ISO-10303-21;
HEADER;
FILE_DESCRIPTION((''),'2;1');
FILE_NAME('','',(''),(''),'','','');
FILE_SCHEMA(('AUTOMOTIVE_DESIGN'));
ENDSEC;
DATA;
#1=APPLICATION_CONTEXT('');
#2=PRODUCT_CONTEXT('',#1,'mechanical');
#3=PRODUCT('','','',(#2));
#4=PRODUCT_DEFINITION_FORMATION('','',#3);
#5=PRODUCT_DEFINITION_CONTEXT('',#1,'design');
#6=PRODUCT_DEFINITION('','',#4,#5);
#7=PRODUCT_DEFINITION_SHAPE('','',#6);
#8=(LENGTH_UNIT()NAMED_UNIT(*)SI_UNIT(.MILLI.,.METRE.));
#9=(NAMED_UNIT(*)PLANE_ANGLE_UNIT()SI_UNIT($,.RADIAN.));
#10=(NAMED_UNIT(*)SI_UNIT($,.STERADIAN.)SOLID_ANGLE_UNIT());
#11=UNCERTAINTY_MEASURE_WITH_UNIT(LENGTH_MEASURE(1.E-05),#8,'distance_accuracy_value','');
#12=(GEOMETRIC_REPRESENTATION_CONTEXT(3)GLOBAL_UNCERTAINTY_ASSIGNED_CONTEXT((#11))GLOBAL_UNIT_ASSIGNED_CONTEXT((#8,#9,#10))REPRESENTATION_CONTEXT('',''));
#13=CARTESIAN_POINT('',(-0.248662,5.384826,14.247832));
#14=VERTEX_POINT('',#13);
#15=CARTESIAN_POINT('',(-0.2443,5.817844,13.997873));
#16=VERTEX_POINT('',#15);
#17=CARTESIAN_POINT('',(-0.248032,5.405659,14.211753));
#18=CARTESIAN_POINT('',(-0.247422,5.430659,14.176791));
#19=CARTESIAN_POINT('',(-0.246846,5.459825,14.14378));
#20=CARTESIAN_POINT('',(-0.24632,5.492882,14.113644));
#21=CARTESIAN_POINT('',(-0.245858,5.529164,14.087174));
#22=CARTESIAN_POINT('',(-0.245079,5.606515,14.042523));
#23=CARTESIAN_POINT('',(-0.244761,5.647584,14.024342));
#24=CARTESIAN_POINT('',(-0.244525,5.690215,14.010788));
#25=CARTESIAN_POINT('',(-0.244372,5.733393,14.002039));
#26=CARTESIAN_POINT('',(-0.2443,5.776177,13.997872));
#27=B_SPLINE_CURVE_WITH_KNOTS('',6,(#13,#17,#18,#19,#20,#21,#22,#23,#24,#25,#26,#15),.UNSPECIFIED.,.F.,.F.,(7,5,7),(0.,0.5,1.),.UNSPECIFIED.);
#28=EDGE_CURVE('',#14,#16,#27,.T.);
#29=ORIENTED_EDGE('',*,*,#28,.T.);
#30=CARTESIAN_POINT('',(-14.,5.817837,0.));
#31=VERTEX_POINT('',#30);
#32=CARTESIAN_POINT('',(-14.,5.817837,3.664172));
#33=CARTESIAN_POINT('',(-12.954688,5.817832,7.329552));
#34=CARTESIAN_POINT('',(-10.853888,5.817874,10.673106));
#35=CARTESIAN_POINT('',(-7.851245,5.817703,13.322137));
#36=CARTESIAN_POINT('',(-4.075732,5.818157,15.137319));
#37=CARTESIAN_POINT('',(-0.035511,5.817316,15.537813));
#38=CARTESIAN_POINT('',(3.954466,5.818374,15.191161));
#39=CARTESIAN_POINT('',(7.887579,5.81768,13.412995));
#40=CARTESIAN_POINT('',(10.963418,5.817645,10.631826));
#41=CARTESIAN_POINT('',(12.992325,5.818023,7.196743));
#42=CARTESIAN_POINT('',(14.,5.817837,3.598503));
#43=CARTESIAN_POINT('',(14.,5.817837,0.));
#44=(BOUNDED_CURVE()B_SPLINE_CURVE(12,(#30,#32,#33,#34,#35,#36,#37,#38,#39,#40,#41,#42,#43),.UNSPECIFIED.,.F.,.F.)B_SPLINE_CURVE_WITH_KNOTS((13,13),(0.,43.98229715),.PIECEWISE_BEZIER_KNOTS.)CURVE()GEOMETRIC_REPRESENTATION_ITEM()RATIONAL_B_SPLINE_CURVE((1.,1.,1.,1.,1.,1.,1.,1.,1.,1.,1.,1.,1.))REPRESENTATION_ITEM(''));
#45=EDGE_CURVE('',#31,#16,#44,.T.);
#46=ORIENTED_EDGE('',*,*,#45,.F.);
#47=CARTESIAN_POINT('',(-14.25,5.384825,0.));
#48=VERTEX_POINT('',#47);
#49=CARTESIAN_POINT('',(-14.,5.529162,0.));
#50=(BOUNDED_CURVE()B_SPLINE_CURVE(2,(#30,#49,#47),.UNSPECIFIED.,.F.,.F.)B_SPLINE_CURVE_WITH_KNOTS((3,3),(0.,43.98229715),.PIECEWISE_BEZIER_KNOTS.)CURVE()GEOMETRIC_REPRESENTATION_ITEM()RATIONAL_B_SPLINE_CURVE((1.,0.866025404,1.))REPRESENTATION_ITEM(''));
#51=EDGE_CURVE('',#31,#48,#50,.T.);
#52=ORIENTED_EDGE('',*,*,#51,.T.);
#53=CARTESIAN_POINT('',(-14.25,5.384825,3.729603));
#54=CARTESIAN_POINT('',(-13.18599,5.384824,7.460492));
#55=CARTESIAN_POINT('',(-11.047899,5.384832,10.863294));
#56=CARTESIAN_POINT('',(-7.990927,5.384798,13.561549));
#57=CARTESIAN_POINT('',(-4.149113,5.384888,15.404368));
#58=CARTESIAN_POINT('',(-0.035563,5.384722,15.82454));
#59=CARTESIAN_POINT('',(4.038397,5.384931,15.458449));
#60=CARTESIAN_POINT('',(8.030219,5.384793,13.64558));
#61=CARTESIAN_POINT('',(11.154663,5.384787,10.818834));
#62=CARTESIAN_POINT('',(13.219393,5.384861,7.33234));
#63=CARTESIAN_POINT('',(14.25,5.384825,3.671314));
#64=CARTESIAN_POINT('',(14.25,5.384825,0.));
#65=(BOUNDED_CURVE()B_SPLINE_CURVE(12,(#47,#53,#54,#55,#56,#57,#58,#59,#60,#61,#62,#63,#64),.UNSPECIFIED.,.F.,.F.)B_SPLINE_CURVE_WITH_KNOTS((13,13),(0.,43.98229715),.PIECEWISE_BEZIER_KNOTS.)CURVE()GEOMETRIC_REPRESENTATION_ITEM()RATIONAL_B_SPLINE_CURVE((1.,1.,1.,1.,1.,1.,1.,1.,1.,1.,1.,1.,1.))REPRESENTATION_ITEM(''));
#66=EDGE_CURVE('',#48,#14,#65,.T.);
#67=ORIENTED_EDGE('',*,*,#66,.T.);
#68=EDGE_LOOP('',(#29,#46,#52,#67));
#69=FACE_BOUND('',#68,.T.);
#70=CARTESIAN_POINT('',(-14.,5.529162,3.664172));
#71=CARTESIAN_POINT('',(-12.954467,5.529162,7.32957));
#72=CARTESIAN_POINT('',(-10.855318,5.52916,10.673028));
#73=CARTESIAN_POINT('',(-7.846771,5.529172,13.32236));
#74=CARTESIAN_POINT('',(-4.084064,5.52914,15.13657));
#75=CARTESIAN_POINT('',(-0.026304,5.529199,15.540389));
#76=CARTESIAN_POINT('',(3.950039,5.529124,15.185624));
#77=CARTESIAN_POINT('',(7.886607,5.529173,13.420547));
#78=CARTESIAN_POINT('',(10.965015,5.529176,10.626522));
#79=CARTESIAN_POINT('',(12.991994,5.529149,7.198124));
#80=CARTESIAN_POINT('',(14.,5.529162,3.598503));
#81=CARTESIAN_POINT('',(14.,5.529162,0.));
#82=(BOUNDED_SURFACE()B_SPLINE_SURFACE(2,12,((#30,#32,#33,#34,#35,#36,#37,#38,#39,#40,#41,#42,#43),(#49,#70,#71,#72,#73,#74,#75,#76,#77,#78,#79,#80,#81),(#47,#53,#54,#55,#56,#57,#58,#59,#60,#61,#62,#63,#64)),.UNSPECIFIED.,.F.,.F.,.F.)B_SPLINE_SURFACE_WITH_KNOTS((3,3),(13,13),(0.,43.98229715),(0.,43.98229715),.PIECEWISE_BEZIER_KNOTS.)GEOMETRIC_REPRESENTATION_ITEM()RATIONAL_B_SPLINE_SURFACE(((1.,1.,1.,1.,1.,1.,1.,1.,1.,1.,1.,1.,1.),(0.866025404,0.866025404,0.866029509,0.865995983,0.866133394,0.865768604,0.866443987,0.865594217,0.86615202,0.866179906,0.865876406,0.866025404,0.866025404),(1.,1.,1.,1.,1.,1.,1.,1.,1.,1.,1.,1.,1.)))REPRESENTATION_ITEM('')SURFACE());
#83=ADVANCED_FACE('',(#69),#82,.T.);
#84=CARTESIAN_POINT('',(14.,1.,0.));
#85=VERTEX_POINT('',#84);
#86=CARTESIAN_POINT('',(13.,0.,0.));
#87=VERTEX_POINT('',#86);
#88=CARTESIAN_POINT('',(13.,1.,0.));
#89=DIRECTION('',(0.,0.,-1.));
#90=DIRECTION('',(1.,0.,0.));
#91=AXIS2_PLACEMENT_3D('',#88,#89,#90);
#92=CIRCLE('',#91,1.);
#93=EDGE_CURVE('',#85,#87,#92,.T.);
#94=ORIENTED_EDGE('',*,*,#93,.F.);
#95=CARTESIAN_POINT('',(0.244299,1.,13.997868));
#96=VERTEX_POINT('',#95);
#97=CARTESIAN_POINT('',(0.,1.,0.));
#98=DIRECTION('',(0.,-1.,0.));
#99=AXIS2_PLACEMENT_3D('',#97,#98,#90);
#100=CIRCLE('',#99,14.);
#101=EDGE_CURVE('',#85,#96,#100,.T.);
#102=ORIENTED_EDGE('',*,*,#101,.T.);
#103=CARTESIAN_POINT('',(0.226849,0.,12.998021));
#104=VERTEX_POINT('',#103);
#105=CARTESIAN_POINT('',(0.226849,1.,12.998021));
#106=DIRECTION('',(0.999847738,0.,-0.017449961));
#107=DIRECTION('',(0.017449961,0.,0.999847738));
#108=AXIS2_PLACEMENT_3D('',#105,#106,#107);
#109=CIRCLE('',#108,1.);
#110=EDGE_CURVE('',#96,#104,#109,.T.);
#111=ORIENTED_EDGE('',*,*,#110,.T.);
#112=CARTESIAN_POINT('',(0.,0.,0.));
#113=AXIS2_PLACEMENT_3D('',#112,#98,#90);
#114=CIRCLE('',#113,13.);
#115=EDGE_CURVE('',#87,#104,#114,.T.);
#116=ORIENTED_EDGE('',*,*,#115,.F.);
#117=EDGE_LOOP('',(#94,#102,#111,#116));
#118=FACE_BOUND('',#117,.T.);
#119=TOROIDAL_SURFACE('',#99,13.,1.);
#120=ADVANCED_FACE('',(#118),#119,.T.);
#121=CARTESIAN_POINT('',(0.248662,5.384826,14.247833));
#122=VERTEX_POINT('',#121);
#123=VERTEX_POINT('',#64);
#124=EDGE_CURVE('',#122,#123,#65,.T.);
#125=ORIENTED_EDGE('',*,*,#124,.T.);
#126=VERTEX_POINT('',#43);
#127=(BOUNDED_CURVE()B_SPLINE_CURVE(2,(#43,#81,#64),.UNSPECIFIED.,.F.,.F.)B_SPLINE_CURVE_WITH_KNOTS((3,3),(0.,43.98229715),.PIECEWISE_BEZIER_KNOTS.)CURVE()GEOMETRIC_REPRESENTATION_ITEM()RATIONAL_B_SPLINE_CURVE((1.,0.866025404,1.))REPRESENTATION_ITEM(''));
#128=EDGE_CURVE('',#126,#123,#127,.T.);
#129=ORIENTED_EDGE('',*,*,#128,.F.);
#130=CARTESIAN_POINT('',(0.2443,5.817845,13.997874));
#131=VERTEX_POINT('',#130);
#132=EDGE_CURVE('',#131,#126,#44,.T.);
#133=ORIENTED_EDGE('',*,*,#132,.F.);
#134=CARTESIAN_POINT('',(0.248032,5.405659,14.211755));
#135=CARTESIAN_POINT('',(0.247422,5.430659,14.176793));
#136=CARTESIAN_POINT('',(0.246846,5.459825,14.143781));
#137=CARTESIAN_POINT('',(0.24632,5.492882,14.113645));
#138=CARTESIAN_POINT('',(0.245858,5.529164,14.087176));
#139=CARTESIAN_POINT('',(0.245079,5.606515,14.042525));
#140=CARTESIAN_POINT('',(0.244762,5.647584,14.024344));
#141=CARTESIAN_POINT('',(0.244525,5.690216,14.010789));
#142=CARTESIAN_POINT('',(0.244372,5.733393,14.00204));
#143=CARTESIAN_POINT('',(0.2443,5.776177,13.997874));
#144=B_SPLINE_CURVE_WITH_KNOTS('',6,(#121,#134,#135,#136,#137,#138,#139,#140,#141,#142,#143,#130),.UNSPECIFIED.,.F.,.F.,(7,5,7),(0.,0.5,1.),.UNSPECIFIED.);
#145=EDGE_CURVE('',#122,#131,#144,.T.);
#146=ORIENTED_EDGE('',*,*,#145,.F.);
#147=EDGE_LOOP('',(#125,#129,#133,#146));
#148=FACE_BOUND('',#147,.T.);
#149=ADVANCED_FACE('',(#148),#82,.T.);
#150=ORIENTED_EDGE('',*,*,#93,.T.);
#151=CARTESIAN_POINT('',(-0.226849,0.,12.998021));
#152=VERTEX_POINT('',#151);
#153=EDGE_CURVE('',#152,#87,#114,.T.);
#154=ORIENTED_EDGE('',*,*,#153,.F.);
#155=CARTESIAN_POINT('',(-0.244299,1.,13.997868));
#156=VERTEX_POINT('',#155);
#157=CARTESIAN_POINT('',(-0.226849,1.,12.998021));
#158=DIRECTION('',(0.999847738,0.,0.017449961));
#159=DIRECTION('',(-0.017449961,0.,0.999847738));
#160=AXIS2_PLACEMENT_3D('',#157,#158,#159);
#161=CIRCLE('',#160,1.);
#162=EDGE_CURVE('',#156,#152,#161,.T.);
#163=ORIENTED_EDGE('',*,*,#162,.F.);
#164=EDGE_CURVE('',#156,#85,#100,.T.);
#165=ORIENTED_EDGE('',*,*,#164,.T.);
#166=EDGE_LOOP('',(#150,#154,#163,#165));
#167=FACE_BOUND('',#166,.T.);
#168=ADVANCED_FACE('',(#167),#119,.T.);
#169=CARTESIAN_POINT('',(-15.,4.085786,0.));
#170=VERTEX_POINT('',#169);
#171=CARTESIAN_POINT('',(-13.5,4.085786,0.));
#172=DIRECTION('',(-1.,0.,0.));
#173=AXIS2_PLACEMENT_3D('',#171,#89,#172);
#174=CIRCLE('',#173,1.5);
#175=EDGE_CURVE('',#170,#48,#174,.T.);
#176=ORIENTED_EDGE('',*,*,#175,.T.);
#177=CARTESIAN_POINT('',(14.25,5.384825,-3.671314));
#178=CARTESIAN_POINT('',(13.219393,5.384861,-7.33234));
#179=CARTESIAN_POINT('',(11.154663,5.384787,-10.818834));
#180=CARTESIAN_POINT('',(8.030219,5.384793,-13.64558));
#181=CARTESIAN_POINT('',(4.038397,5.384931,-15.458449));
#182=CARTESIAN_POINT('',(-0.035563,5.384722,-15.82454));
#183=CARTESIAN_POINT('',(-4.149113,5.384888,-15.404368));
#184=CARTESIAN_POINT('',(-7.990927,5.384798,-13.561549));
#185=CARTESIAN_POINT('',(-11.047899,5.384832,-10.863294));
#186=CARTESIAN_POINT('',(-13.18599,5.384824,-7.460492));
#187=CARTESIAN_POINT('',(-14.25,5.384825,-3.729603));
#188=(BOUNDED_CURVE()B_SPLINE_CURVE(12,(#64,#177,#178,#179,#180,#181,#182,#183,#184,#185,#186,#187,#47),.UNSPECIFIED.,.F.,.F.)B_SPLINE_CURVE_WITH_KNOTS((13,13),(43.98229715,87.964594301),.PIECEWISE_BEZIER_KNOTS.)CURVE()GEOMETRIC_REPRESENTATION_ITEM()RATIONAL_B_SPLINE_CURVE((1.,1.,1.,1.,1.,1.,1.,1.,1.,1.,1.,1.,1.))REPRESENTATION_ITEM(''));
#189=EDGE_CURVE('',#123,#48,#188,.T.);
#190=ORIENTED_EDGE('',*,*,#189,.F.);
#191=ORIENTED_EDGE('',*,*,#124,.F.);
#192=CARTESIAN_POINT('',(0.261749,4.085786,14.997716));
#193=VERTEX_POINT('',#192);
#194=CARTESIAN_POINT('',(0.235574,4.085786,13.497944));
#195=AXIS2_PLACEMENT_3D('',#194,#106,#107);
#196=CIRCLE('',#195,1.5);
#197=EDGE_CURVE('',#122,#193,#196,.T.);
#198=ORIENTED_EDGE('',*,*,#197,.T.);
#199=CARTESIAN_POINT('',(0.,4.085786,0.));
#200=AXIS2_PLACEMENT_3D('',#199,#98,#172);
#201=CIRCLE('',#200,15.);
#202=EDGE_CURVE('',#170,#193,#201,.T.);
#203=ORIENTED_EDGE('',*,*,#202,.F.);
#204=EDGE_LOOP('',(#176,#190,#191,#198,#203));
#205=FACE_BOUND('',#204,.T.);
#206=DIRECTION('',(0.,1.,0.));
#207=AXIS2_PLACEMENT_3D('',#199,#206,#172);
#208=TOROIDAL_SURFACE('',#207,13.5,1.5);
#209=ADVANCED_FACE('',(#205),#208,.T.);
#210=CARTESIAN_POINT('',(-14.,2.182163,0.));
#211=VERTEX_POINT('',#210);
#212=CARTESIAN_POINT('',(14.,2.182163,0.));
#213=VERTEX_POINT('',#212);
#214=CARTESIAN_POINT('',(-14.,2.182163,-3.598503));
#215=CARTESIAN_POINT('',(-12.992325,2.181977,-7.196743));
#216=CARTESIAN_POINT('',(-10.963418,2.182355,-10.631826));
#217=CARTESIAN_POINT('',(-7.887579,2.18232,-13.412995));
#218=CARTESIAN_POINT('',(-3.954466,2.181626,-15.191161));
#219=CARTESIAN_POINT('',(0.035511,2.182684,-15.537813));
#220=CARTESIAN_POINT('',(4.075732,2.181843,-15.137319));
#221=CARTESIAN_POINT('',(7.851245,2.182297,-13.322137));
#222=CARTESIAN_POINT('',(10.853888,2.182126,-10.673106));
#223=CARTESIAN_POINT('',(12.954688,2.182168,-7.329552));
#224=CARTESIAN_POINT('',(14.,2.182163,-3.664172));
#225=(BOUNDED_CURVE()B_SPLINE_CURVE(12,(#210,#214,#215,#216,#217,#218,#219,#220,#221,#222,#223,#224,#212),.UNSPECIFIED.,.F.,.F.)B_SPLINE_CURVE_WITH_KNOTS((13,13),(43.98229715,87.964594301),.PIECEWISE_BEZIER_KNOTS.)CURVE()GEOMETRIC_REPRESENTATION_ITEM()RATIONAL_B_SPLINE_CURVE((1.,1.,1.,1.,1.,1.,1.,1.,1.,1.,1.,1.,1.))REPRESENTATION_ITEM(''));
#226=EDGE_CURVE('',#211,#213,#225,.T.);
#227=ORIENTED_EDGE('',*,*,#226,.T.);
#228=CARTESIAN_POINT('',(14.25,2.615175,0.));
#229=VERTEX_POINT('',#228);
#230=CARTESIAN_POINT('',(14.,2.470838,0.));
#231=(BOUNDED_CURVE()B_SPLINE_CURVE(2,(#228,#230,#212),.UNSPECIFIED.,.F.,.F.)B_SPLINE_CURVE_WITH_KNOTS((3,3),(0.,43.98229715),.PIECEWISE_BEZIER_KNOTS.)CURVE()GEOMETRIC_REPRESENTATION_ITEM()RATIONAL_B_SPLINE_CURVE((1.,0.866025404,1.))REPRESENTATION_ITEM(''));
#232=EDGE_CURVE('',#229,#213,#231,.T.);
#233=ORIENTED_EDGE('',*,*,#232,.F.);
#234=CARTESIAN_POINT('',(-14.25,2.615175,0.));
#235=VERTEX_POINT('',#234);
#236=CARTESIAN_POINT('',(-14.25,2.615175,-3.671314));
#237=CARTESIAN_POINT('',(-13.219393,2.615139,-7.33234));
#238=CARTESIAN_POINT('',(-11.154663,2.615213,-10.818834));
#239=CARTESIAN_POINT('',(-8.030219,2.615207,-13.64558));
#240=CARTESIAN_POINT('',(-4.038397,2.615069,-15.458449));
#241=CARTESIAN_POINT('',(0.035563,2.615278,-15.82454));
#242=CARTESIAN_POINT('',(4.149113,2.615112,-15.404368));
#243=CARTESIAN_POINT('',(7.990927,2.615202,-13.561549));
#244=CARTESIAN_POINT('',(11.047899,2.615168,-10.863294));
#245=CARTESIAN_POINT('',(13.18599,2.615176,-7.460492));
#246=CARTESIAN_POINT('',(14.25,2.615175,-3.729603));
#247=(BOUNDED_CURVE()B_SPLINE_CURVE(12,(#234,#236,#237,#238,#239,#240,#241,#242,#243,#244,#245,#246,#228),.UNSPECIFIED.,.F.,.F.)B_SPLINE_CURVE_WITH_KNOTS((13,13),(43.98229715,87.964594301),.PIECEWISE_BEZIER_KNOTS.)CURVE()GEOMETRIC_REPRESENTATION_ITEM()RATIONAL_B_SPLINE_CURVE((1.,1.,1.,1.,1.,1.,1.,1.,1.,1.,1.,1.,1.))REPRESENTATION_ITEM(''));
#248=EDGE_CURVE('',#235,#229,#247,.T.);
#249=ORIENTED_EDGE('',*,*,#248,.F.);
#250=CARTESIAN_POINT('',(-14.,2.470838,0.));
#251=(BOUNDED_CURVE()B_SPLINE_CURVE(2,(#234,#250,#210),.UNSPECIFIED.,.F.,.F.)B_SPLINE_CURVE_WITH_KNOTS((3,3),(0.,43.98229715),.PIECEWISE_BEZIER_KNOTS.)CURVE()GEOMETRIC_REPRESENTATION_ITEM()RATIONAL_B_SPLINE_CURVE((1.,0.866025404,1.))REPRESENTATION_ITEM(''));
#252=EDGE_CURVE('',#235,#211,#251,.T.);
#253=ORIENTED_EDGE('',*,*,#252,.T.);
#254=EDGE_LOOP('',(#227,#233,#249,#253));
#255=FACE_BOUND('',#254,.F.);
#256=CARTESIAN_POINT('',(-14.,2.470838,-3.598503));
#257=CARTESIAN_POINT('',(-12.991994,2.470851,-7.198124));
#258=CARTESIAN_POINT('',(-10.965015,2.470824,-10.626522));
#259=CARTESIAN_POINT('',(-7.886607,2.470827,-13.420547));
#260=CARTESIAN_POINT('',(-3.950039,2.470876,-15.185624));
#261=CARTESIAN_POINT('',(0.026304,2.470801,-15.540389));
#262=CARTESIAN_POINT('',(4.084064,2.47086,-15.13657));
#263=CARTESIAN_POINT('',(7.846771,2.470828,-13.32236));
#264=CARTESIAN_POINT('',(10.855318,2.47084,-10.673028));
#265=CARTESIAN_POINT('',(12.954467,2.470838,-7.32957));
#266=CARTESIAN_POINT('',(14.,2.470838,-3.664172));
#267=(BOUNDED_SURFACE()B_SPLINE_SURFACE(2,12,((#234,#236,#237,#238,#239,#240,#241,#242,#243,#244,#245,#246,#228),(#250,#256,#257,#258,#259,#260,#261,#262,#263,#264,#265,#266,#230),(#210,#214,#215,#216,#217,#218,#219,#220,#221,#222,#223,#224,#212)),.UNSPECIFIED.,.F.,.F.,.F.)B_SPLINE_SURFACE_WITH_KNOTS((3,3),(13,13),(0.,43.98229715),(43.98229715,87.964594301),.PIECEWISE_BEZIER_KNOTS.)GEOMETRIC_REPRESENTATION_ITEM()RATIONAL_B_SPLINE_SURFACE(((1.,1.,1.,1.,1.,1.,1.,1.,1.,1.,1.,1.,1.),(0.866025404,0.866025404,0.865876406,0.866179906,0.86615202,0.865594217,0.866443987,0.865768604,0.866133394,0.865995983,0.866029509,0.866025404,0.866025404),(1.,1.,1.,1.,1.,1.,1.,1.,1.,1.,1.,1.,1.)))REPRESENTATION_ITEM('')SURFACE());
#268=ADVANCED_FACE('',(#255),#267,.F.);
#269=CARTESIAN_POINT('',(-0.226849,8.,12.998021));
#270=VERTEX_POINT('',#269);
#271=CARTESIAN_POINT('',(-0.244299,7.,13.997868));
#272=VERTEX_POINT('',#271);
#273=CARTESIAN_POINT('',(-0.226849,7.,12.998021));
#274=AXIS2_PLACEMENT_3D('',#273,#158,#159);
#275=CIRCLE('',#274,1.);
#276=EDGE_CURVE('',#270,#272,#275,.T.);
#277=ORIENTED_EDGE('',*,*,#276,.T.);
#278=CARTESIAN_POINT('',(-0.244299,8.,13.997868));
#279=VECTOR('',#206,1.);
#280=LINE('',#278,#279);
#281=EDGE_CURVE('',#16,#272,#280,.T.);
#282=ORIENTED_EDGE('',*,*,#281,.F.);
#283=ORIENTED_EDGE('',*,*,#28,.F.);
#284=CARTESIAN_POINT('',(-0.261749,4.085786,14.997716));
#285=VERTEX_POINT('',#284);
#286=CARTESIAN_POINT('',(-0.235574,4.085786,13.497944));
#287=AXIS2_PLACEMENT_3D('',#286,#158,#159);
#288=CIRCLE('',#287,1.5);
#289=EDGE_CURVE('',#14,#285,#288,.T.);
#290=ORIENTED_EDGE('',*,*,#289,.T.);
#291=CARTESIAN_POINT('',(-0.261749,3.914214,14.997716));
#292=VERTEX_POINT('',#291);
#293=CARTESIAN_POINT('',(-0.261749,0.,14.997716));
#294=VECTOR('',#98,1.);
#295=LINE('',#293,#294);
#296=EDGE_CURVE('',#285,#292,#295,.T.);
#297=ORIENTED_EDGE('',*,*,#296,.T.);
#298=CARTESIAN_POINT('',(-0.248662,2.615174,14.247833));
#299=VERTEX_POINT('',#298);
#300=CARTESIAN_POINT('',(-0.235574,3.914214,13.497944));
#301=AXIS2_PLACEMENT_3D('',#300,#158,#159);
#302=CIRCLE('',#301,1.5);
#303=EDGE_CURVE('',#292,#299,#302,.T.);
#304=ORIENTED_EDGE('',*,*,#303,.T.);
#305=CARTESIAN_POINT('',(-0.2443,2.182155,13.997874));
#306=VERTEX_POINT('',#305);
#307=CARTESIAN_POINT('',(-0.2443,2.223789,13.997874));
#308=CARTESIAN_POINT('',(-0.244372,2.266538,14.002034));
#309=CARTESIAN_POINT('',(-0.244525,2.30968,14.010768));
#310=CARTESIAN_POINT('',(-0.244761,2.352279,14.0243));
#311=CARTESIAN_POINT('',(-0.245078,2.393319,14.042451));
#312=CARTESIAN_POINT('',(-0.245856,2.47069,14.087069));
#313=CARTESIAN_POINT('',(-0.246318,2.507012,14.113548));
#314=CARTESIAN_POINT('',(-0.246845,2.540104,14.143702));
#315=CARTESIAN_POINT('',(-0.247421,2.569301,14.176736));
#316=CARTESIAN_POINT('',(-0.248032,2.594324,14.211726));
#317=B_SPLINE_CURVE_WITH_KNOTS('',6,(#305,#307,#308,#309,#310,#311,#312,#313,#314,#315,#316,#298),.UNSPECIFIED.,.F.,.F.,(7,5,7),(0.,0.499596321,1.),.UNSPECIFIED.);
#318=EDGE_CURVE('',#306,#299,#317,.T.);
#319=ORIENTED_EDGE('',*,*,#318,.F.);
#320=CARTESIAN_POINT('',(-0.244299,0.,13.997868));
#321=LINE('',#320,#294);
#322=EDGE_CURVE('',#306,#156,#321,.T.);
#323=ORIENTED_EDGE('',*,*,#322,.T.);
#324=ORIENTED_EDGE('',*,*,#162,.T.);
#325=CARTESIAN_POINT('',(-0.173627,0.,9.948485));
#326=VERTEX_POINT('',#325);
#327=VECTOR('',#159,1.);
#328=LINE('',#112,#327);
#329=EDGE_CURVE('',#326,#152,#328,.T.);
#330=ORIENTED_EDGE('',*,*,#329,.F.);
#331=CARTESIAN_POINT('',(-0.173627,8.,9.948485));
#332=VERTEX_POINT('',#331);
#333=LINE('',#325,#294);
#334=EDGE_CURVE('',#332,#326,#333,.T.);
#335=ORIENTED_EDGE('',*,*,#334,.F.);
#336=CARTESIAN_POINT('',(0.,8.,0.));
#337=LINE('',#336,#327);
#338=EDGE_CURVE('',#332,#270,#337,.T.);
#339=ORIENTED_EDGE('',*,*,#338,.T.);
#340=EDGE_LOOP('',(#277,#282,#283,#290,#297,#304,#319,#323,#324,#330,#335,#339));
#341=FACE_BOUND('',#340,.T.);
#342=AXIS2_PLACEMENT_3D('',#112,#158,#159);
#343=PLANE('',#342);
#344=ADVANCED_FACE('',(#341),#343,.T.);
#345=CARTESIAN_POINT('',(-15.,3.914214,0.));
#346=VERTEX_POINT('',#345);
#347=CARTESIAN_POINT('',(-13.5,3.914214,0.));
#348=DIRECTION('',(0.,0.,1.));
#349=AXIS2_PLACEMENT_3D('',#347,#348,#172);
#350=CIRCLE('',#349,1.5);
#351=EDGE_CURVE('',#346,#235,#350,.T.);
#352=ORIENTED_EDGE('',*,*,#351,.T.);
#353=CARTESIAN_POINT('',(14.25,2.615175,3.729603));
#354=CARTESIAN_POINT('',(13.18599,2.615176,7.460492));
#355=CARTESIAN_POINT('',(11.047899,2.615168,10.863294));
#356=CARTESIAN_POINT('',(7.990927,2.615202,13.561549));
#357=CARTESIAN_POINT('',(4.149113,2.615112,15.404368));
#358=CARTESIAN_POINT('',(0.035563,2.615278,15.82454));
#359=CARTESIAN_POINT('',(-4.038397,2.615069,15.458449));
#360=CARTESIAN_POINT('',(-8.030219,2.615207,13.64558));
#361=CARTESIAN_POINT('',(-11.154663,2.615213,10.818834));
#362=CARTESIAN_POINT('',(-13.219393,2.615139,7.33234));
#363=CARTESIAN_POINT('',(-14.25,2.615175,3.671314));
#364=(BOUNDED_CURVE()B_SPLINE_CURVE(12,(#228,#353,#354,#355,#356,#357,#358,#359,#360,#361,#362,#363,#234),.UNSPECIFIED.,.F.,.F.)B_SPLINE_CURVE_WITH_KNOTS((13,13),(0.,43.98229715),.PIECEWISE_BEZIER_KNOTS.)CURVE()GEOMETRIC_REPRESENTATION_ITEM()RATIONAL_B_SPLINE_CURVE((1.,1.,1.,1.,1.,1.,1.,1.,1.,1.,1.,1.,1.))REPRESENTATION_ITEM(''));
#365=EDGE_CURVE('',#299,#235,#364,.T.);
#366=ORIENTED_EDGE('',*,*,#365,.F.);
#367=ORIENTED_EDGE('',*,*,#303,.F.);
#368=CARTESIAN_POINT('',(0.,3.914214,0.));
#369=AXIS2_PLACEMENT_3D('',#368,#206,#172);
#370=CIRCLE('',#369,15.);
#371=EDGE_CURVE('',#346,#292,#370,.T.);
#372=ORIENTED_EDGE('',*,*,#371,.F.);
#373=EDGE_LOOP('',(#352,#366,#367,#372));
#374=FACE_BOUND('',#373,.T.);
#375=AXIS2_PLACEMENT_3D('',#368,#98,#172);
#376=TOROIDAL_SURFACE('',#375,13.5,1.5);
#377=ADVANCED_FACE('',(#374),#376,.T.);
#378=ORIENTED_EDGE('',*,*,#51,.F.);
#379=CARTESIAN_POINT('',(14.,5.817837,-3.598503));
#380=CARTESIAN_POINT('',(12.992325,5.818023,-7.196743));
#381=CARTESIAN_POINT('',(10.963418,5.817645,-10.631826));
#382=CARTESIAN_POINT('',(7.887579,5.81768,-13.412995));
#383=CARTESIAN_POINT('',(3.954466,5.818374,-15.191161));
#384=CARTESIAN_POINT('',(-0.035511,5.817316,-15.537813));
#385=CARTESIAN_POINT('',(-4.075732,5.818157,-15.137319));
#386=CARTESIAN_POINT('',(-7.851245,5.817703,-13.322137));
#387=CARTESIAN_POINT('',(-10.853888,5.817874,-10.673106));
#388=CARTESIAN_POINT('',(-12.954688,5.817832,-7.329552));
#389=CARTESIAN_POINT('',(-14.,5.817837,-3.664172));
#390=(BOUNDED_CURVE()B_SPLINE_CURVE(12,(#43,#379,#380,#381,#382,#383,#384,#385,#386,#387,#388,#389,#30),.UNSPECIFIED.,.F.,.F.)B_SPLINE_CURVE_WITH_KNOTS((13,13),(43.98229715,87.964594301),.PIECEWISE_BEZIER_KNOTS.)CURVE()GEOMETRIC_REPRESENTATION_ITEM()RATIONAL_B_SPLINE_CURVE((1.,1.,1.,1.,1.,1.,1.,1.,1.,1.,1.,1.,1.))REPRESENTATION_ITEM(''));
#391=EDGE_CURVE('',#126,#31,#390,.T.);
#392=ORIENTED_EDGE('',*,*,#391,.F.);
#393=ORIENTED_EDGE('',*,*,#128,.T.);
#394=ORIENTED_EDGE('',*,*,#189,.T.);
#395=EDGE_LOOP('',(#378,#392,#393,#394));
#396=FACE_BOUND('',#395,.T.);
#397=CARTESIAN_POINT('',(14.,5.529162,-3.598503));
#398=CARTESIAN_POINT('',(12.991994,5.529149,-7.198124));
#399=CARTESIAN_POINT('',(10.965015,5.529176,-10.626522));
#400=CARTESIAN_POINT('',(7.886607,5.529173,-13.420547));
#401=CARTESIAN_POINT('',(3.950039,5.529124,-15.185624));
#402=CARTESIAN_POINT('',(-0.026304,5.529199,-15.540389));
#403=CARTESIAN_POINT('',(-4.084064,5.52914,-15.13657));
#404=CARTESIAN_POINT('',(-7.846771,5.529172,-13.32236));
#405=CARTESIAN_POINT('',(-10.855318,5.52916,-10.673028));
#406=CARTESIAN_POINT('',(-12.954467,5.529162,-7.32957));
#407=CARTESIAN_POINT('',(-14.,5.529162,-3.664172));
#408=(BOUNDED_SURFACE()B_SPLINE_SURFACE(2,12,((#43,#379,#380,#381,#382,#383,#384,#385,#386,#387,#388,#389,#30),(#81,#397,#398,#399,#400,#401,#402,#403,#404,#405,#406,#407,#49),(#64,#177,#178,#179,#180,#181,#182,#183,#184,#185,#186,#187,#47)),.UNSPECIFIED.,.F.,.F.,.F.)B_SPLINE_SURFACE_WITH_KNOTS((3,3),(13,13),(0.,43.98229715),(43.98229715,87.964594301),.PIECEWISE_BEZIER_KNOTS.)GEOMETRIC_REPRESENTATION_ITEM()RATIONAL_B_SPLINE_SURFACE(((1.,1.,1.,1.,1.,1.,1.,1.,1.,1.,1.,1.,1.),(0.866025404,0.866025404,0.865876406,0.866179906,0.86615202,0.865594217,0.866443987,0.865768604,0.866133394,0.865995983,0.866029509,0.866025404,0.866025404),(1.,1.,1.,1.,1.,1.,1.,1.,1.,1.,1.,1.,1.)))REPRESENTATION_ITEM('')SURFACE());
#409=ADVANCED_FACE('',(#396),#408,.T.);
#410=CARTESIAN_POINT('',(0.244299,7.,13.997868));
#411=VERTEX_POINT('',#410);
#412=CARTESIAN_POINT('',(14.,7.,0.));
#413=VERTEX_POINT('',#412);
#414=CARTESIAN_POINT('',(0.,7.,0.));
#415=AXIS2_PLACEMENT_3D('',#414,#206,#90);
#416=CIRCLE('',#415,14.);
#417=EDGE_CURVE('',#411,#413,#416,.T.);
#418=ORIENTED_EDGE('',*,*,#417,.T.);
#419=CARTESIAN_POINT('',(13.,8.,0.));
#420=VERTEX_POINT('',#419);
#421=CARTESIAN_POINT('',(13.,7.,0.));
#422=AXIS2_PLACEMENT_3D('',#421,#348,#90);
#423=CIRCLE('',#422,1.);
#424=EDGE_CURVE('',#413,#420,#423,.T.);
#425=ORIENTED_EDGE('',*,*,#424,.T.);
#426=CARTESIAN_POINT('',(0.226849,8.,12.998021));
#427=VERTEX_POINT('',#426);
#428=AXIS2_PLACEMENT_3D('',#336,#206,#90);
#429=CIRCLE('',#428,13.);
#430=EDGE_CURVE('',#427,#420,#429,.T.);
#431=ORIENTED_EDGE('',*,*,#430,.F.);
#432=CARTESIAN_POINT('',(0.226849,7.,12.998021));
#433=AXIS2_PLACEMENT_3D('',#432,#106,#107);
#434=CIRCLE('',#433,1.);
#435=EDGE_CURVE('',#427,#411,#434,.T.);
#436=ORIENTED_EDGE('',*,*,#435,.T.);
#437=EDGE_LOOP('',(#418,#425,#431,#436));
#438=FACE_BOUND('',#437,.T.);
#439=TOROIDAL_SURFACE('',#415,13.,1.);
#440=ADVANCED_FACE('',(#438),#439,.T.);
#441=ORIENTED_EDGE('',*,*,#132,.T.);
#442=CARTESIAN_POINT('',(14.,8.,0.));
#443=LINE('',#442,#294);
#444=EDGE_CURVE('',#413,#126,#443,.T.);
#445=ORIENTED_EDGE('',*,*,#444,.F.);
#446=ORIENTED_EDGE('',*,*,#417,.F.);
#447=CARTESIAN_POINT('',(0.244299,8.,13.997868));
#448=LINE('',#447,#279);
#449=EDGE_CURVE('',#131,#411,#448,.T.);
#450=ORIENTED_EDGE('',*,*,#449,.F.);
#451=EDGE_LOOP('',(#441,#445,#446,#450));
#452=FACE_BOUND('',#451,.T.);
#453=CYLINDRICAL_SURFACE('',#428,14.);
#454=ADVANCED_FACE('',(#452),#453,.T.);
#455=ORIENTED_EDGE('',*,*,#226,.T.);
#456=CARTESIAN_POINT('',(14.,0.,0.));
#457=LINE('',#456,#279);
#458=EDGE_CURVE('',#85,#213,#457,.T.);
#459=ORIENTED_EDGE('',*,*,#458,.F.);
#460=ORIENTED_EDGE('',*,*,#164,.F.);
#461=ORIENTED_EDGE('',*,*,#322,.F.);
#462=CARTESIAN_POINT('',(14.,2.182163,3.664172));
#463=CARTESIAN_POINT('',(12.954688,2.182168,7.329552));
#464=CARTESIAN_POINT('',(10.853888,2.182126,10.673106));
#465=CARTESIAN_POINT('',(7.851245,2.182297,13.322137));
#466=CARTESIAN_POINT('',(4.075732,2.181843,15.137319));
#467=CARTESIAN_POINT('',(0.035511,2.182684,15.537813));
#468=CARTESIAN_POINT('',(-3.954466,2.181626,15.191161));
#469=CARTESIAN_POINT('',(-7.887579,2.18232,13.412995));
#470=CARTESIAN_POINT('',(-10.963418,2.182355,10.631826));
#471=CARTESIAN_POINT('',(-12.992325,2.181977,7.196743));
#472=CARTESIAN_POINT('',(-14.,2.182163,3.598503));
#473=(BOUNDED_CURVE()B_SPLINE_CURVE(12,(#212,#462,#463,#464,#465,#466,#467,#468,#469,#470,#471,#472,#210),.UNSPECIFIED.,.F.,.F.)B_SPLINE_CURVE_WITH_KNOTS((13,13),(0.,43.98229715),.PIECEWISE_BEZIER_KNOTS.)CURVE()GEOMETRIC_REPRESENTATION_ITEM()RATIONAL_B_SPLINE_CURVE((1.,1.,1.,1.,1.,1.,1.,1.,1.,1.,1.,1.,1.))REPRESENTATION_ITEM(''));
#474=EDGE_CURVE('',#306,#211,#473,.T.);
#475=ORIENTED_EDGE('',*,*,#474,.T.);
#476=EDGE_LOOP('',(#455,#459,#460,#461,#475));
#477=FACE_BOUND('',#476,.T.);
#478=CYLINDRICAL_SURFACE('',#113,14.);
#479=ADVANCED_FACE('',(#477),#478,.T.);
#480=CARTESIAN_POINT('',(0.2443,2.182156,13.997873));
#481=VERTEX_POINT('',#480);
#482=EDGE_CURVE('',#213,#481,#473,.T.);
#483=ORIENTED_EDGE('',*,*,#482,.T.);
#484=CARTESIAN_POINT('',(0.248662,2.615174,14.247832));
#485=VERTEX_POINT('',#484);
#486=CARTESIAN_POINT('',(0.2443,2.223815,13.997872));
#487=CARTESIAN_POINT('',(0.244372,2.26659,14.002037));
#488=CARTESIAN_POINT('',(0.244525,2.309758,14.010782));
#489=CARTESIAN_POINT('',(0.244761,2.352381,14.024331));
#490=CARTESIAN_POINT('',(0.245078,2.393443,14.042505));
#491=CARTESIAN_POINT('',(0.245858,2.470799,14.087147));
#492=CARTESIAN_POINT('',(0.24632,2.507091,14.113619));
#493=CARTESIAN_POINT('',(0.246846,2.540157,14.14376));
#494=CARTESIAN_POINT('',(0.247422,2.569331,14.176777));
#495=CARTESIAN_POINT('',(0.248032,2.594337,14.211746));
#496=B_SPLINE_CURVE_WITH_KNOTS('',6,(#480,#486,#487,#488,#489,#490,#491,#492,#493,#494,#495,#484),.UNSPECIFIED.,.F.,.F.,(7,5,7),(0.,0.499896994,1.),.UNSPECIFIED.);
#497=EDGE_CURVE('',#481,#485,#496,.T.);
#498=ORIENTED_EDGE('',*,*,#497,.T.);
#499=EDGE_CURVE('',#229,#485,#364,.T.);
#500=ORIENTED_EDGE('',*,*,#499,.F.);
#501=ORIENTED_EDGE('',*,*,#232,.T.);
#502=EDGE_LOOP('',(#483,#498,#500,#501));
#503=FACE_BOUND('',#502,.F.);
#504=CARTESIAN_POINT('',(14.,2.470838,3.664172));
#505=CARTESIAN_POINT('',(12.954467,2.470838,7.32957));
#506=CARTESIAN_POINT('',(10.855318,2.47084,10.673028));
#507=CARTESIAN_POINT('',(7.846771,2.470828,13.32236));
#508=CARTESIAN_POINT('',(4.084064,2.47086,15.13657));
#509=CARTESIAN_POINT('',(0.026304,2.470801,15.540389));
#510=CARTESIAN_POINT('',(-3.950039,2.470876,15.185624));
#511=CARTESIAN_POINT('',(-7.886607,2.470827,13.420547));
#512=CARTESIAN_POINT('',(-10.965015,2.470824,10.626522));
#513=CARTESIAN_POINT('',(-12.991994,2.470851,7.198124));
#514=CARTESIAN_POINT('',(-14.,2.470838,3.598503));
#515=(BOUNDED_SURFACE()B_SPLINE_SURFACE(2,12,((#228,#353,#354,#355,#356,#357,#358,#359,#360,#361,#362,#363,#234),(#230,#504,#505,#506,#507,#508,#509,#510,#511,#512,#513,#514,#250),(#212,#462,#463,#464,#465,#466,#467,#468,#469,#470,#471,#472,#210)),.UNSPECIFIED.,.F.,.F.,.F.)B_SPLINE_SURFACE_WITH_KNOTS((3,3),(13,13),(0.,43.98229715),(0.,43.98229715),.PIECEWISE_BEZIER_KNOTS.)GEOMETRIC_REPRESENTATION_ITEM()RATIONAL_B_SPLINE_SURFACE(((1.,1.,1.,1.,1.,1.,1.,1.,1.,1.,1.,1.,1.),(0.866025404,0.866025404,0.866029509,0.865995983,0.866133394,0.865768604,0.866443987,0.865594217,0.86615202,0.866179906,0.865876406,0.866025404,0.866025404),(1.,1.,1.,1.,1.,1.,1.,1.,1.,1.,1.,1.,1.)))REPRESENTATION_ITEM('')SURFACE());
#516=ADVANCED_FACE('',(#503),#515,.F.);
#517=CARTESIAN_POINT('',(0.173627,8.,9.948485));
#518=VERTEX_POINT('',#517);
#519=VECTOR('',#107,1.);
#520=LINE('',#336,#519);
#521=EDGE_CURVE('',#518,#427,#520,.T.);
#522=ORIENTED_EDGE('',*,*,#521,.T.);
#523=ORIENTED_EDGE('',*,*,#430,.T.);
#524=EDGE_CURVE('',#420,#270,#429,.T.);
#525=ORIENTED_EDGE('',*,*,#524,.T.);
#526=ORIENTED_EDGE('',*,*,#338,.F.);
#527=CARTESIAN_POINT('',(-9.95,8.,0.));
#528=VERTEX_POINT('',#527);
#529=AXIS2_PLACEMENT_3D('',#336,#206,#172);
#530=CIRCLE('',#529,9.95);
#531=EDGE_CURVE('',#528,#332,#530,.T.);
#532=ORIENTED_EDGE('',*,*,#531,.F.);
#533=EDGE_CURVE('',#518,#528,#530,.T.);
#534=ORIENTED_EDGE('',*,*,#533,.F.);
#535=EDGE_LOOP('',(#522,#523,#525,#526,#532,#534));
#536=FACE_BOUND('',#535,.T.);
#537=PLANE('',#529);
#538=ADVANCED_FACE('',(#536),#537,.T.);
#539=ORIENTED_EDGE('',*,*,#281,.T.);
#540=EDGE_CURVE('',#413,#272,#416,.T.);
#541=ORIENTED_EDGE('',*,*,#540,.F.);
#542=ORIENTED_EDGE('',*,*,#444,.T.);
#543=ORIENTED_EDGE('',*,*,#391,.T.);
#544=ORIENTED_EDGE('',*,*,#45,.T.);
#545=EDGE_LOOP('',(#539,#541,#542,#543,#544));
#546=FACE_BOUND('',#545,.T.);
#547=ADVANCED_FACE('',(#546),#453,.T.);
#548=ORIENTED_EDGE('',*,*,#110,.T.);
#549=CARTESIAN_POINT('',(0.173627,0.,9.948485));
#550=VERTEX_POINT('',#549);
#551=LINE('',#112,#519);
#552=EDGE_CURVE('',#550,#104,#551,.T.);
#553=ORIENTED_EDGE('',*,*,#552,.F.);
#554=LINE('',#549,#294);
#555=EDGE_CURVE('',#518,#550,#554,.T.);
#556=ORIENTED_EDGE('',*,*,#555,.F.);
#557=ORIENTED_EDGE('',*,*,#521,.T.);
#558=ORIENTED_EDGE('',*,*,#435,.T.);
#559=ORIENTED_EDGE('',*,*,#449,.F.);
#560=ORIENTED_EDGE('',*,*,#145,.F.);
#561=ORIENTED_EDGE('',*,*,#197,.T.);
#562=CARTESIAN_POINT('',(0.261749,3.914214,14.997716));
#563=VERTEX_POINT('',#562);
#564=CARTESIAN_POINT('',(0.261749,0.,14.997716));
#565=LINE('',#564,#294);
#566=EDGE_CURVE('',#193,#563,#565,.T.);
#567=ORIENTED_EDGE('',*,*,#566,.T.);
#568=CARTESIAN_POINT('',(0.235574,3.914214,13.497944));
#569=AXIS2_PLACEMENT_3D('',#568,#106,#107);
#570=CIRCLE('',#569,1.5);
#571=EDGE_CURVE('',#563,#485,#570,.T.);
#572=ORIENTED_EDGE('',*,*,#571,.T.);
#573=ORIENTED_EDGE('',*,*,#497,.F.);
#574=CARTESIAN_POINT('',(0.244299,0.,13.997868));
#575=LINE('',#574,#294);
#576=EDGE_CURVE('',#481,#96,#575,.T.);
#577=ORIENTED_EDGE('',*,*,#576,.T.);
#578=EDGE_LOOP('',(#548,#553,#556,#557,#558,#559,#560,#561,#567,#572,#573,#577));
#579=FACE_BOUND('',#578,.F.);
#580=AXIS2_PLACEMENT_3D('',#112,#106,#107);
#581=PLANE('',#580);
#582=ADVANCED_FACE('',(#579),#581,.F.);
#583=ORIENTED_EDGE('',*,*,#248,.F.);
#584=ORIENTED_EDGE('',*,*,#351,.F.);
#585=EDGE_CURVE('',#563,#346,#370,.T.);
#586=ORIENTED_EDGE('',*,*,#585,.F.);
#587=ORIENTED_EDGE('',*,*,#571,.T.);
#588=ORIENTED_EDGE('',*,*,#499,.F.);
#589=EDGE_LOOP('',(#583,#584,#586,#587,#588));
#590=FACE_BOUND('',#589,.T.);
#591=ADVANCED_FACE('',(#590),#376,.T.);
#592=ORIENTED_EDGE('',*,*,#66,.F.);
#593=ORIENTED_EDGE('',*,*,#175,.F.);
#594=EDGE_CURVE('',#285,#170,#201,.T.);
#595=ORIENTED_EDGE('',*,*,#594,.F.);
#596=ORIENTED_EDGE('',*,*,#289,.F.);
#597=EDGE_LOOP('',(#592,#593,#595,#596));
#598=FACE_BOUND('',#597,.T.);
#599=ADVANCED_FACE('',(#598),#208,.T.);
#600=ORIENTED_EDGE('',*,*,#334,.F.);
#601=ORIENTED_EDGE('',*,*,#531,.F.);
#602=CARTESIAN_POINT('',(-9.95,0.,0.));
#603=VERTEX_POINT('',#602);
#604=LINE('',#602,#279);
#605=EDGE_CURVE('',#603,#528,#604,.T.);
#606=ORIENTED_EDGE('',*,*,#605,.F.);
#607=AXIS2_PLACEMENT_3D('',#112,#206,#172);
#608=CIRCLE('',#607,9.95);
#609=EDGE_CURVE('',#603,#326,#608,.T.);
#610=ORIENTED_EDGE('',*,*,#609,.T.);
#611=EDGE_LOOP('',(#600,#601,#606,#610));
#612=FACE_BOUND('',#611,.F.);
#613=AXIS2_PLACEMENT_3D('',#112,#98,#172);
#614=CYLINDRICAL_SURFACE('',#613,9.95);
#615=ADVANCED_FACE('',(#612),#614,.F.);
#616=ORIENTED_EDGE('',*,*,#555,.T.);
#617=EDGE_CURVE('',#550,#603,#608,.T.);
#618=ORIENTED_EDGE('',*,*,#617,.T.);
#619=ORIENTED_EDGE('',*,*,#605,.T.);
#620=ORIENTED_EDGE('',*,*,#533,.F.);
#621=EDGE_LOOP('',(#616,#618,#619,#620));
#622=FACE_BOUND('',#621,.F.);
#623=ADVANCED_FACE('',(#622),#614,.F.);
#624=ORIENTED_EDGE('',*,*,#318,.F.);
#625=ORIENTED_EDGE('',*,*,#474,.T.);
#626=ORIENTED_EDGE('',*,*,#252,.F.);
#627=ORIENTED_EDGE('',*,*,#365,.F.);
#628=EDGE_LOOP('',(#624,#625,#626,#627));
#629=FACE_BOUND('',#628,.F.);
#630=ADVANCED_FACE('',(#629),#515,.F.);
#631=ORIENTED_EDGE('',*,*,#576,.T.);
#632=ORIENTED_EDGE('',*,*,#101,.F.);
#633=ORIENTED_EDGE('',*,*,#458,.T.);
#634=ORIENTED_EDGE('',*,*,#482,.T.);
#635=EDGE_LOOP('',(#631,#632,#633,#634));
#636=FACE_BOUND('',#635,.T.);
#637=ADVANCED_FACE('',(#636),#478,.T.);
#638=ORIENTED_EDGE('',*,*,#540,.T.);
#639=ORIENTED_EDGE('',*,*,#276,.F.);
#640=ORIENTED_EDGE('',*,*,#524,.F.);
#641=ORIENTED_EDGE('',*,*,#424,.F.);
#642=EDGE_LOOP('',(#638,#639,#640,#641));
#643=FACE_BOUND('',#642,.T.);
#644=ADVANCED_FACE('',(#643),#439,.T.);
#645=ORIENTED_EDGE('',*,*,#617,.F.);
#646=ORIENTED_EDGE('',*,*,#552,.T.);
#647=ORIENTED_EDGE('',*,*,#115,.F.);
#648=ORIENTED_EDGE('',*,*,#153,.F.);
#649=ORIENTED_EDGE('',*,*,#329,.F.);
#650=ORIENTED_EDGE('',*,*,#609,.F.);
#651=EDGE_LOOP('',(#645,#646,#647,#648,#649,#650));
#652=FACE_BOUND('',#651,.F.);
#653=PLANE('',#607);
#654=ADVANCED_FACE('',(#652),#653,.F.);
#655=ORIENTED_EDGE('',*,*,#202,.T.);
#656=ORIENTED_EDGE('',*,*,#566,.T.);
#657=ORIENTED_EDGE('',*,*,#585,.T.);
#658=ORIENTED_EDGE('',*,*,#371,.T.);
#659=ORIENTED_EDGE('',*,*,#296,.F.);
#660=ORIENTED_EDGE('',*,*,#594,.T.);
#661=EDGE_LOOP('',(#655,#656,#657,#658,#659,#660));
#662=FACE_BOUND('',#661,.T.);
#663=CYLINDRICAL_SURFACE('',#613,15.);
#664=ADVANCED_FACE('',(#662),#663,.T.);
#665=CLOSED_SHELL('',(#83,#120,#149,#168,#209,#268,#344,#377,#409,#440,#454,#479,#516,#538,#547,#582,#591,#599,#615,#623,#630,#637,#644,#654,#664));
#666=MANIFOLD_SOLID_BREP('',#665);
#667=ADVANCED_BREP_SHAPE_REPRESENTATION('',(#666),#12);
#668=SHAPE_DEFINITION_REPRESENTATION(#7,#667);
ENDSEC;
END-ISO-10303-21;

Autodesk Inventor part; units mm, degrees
ref_plane "YZ Plane" through (0, 0, 0) normal (1, 0, 0) x (0, 1, 0)
ref_plane "XZ Plane" through (0, 0, 0) normal (0, 1, 0) x (-1, 0, 0)
ref_plane "XY Plane" through (0, 0, 0) normal (0, 0, 1) x (1, 0, 0)
sketch "Esboço1" plane through (0, 0, 0) normal (0, 1, 0) x (-1, 0, 0)
  circle A0 centre (0, 0) radius 15
  circle A1 centre (0, 0) radius 9.95
  dimension "d0" = 30
  dimension "d1" = 19.9
extrude "Extrusão1" add sketch "Esboço1" along normal blind 8
sketch "Esboço2" plane through (0, 8, 0) normal (0, 1, 0) x (1, 0, 0)
  circle A0 centre (0, 0) radius 15
  circle A1 centre (0, 0) radius 14
  dimension "d4" = 30
  dimension "d5" = 28
extrude "Extrusão2" cut sketch "Esboço2" against normal blind 2.5
sketch "Esboço3" plane through (0, 0, 0) normal (0, -1, 0) x (1, 0, 0)
  circle A0 centre (0, 0) radius 15
  circle A1 centre (0, 0) radius 14 projected
  circle A2 centre (0, 0) radius 14
  dimension "d8" = 30
extrude "Extrusão3" cut sketch "Esboço3" against normal blind 2.5
fillet "Arredondamento1" radius 1.5 1 edges at (15, 2.5, 0)
fillet "Arredondamento2" radius 1.5 1 edges at (15, 5.5, 0)
fillet "Arredondamento3" radius 1 2 edges at (-14, 0, 0) (-14, 8, 0)
fillet "Arredondamento4" radius 0.5 4 edges at (0, 2.5, 14) (0, 2.5, -14) (0, 5.5, 14) (0, 5.5, -14)
sketch "Esboço4" plane through (0, 0, 0) normal (0, -1, 0) x (1, 0, 0)
  line L0 (0, 0) -> (-0.3141, 17.9973)
  line L1 (0, 0) -> (18, 0) construction
  line L2 (0, 0) -> (0.3141, 17.9973)
  line L3 (0, 0) -> (18, 0) construction
  line L4 (0.3141, 17.9973) -> (-0.3141, 17.9973)
  dimension "d15" = 18
  dimension "d16" = 91
  dimension "d17" = 18
  dimension "d18" = 89
extrude "Extrusão4" cut sketch "Esboço4" against normal up to surface (8 mm away)
properties part number "anel rotacao sonda completo com gap"
